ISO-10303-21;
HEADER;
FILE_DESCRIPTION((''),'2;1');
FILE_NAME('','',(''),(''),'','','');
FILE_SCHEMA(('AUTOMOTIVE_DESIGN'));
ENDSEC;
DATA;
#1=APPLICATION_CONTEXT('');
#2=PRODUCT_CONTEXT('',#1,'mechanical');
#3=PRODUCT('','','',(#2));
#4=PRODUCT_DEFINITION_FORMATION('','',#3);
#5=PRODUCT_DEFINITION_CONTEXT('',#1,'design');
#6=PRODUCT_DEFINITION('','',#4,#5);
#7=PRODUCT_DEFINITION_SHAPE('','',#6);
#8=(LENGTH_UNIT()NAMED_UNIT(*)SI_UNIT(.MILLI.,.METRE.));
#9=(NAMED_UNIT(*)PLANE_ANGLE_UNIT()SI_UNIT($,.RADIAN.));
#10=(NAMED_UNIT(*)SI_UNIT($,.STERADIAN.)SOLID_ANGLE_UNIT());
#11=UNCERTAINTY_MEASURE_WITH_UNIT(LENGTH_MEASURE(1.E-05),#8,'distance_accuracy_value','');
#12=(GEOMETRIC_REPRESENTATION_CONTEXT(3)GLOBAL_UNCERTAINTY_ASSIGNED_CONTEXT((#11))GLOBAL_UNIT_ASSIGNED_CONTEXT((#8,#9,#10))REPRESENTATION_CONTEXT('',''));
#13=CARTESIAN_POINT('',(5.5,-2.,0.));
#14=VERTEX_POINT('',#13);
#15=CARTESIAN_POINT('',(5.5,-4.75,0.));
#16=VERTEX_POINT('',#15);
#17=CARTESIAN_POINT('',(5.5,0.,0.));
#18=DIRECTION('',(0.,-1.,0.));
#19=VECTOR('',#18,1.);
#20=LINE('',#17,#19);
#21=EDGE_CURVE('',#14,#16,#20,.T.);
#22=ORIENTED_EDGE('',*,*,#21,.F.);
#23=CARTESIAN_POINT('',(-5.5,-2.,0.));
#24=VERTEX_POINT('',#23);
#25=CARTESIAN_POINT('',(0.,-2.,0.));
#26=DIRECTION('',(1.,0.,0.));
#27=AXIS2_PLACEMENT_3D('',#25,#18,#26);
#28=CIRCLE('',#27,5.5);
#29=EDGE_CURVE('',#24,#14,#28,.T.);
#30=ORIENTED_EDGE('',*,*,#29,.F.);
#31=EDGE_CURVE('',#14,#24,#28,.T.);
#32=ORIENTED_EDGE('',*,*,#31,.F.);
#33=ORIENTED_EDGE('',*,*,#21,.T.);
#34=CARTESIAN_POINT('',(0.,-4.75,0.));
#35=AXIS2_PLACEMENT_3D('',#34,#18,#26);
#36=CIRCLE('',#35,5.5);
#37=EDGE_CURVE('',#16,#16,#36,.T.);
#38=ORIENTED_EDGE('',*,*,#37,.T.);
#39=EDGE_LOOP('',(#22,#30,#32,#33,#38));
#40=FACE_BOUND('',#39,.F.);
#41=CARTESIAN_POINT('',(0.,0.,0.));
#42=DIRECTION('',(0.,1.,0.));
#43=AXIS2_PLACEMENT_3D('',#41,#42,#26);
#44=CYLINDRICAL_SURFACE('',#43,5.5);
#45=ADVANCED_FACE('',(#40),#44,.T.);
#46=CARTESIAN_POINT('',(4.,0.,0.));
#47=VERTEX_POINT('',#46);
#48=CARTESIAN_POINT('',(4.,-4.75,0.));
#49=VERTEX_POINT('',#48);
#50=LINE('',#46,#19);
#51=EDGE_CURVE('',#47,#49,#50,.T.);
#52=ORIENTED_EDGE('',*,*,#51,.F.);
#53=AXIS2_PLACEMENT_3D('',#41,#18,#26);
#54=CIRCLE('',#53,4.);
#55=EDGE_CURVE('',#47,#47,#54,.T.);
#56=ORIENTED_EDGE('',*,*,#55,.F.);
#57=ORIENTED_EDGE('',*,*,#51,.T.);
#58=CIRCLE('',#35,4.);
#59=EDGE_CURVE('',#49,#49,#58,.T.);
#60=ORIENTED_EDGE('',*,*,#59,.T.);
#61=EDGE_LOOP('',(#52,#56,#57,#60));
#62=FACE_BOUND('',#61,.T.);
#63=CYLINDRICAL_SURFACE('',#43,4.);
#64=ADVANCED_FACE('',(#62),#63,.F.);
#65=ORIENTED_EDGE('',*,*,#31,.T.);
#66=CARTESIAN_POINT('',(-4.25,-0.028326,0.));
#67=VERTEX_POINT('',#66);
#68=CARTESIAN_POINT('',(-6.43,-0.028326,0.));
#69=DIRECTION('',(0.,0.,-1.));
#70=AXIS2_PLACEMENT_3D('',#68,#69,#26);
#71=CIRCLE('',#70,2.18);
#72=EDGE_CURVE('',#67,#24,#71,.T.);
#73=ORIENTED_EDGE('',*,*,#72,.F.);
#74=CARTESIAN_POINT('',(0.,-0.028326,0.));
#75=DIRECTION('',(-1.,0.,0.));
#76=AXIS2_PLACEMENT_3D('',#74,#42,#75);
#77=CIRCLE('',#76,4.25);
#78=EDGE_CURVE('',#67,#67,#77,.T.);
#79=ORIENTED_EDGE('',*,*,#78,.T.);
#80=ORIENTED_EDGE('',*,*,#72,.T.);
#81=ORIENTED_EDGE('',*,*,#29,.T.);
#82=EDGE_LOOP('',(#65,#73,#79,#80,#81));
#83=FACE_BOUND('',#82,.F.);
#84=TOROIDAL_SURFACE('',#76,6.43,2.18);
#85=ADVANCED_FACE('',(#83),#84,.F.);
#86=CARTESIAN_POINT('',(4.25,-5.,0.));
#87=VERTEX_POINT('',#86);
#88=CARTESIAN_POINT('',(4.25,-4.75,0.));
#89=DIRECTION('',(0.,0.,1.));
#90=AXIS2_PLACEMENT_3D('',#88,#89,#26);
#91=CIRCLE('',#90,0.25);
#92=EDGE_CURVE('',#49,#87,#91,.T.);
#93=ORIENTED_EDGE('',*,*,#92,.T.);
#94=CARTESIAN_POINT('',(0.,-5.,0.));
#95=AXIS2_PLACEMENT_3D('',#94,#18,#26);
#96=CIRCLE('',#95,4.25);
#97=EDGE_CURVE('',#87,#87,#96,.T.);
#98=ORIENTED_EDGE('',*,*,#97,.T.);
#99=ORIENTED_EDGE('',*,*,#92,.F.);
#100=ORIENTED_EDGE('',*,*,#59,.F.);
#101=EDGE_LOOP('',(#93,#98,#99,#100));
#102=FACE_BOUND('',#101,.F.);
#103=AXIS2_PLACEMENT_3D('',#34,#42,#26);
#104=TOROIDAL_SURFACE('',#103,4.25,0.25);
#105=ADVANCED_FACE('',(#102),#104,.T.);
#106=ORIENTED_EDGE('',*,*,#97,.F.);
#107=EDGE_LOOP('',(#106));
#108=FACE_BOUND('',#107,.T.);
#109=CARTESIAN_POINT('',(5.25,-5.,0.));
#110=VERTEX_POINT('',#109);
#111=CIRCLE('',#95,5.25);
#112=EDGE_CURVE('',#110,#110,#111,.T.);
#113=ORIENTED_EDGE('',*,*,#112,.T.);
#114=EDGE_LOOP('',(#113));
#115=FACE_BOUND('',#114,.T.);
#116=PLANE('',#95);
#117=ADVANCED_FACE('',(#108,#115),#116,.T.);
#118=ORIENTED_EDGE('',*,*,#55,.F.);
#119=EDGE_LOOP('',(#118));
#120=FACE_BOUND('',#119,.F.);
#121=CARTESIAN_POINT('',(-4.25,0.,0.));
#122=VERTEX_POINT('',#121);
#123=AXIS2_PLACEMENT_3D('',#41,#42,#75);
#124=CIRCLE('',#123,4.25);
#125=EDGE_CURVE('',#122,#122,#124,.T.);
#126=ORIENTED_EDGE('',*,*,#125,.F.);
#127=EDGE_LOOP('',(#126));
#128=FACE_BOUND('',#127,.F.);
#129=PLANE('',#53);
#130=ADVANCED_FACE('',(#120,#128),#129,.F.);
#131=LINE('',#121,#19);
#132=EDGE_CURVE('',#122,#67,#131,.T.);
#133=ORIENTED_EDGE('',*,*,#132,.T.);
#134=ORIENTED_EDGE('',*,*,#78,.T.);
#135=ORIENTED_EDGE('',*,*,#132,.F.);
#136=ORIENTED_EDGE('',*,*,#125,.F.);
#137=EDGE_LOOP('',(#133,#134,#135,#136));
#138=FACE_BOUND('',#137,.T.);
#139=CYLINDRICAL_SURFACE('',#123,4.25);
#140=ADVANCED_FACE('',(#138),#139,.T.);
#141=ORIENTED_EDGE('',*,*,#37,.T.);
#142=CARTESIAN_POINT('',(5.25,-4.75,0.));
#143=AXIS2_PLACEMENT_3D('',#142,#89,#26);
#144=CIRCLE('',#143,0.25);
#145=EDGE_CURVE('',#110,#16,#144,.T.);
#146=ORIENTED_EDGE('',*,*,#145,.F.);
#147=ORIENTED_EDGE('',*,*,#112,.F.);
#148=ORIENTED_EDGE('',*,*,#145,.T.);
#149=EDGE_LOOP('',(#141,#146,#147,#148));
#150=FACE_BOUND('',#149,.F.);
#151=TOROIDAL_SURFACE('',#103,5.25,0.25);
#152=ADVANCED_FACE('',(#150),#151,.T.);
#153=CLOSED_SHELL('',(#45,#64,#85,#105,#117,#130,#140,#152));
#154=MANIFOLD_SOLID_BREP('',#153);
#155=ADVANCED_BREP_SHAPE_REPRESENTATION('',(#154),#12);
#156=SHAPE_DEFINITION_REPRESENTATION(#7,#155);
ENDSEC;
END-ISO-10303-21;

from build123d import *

# Parameters (mm, degrees)
F0_R     = 5.5
F0_R_2   = 4
F4_DEPTH = 5
F5_R     = 0.25
F6_R     = 0.25
F1_R     = 5.5
F1_R_2   = 4.25
F2_DEPTH = 2


# Not quite as in the source:
# - a fillet or chamfer that OpenCascade refuses, or shapes differently, is made with other operations: its cross-section is extruded or revolved along the edge and cut away or added


with BuildPart() as f4:
    # F0 (on Front) → F4 (new body)
    with BuildSketch(Plane.XZ):
        Circle(F0_R)
        Circle(F0_R_2, mode=Mode.SUBTRACT)
    extrude(amount=F4_DEPTH)

    # F5
    f5_edges = [f4.edges().sort_by_distance(p)[0] for p in [
        (-4, -5, 0),
    ]]
    fillet(f5_edges, radius=F5_R)

    # F6
    f6_edges = [f4.edges().sort_by_distance(p)[0] for p in [
        (-5.5, -5, 0),
    ]]
    fillet(f6_edges, radius=F6_R)

    # F1 (on face) → F2 (cut)
    with BuildSketch(Plane(origin=(0, 0, 0), x_dir=(-1, 0, 0), z_dir=(0, 1, 0))):
        Circle(F1_R)
        Circle(F1_R_2, mode=Mode.SUBTRACT)
    extrude(amount=-F2_DEPTH, mode=Mode.SUBTRACT)

    # F3: fillet of radius 2.18 on 1 edges, made by hand

    # F3_s1 → F3_t2 (revolve)
    with BuildSketch(Plane.XY):
        with BuildLine():
            ThreePointArc((-4.25, -0.0283255847), (-4.5888318925, -1.1955873377), (-5.5, -2))
            Line((-5.5, -2), (-5.4814, -2.0394334883))
            ThreePointArc((-5.4814, -2.0394334883), (-4.875, -2.0436), (-4.25, -2.0436))
            Line((-4.25, -2.0436), (-4.2064, -2))
            Line((-4.2064, -2), (-4.2064, -0.0283255847))
            Line((-4.2064, -0.0283255847), (-4.25, -0.0283255847))
        make_face()
    revolve(axis=Axis((0, -2, 0), (0, 1, 0)))


solid = f4.part
